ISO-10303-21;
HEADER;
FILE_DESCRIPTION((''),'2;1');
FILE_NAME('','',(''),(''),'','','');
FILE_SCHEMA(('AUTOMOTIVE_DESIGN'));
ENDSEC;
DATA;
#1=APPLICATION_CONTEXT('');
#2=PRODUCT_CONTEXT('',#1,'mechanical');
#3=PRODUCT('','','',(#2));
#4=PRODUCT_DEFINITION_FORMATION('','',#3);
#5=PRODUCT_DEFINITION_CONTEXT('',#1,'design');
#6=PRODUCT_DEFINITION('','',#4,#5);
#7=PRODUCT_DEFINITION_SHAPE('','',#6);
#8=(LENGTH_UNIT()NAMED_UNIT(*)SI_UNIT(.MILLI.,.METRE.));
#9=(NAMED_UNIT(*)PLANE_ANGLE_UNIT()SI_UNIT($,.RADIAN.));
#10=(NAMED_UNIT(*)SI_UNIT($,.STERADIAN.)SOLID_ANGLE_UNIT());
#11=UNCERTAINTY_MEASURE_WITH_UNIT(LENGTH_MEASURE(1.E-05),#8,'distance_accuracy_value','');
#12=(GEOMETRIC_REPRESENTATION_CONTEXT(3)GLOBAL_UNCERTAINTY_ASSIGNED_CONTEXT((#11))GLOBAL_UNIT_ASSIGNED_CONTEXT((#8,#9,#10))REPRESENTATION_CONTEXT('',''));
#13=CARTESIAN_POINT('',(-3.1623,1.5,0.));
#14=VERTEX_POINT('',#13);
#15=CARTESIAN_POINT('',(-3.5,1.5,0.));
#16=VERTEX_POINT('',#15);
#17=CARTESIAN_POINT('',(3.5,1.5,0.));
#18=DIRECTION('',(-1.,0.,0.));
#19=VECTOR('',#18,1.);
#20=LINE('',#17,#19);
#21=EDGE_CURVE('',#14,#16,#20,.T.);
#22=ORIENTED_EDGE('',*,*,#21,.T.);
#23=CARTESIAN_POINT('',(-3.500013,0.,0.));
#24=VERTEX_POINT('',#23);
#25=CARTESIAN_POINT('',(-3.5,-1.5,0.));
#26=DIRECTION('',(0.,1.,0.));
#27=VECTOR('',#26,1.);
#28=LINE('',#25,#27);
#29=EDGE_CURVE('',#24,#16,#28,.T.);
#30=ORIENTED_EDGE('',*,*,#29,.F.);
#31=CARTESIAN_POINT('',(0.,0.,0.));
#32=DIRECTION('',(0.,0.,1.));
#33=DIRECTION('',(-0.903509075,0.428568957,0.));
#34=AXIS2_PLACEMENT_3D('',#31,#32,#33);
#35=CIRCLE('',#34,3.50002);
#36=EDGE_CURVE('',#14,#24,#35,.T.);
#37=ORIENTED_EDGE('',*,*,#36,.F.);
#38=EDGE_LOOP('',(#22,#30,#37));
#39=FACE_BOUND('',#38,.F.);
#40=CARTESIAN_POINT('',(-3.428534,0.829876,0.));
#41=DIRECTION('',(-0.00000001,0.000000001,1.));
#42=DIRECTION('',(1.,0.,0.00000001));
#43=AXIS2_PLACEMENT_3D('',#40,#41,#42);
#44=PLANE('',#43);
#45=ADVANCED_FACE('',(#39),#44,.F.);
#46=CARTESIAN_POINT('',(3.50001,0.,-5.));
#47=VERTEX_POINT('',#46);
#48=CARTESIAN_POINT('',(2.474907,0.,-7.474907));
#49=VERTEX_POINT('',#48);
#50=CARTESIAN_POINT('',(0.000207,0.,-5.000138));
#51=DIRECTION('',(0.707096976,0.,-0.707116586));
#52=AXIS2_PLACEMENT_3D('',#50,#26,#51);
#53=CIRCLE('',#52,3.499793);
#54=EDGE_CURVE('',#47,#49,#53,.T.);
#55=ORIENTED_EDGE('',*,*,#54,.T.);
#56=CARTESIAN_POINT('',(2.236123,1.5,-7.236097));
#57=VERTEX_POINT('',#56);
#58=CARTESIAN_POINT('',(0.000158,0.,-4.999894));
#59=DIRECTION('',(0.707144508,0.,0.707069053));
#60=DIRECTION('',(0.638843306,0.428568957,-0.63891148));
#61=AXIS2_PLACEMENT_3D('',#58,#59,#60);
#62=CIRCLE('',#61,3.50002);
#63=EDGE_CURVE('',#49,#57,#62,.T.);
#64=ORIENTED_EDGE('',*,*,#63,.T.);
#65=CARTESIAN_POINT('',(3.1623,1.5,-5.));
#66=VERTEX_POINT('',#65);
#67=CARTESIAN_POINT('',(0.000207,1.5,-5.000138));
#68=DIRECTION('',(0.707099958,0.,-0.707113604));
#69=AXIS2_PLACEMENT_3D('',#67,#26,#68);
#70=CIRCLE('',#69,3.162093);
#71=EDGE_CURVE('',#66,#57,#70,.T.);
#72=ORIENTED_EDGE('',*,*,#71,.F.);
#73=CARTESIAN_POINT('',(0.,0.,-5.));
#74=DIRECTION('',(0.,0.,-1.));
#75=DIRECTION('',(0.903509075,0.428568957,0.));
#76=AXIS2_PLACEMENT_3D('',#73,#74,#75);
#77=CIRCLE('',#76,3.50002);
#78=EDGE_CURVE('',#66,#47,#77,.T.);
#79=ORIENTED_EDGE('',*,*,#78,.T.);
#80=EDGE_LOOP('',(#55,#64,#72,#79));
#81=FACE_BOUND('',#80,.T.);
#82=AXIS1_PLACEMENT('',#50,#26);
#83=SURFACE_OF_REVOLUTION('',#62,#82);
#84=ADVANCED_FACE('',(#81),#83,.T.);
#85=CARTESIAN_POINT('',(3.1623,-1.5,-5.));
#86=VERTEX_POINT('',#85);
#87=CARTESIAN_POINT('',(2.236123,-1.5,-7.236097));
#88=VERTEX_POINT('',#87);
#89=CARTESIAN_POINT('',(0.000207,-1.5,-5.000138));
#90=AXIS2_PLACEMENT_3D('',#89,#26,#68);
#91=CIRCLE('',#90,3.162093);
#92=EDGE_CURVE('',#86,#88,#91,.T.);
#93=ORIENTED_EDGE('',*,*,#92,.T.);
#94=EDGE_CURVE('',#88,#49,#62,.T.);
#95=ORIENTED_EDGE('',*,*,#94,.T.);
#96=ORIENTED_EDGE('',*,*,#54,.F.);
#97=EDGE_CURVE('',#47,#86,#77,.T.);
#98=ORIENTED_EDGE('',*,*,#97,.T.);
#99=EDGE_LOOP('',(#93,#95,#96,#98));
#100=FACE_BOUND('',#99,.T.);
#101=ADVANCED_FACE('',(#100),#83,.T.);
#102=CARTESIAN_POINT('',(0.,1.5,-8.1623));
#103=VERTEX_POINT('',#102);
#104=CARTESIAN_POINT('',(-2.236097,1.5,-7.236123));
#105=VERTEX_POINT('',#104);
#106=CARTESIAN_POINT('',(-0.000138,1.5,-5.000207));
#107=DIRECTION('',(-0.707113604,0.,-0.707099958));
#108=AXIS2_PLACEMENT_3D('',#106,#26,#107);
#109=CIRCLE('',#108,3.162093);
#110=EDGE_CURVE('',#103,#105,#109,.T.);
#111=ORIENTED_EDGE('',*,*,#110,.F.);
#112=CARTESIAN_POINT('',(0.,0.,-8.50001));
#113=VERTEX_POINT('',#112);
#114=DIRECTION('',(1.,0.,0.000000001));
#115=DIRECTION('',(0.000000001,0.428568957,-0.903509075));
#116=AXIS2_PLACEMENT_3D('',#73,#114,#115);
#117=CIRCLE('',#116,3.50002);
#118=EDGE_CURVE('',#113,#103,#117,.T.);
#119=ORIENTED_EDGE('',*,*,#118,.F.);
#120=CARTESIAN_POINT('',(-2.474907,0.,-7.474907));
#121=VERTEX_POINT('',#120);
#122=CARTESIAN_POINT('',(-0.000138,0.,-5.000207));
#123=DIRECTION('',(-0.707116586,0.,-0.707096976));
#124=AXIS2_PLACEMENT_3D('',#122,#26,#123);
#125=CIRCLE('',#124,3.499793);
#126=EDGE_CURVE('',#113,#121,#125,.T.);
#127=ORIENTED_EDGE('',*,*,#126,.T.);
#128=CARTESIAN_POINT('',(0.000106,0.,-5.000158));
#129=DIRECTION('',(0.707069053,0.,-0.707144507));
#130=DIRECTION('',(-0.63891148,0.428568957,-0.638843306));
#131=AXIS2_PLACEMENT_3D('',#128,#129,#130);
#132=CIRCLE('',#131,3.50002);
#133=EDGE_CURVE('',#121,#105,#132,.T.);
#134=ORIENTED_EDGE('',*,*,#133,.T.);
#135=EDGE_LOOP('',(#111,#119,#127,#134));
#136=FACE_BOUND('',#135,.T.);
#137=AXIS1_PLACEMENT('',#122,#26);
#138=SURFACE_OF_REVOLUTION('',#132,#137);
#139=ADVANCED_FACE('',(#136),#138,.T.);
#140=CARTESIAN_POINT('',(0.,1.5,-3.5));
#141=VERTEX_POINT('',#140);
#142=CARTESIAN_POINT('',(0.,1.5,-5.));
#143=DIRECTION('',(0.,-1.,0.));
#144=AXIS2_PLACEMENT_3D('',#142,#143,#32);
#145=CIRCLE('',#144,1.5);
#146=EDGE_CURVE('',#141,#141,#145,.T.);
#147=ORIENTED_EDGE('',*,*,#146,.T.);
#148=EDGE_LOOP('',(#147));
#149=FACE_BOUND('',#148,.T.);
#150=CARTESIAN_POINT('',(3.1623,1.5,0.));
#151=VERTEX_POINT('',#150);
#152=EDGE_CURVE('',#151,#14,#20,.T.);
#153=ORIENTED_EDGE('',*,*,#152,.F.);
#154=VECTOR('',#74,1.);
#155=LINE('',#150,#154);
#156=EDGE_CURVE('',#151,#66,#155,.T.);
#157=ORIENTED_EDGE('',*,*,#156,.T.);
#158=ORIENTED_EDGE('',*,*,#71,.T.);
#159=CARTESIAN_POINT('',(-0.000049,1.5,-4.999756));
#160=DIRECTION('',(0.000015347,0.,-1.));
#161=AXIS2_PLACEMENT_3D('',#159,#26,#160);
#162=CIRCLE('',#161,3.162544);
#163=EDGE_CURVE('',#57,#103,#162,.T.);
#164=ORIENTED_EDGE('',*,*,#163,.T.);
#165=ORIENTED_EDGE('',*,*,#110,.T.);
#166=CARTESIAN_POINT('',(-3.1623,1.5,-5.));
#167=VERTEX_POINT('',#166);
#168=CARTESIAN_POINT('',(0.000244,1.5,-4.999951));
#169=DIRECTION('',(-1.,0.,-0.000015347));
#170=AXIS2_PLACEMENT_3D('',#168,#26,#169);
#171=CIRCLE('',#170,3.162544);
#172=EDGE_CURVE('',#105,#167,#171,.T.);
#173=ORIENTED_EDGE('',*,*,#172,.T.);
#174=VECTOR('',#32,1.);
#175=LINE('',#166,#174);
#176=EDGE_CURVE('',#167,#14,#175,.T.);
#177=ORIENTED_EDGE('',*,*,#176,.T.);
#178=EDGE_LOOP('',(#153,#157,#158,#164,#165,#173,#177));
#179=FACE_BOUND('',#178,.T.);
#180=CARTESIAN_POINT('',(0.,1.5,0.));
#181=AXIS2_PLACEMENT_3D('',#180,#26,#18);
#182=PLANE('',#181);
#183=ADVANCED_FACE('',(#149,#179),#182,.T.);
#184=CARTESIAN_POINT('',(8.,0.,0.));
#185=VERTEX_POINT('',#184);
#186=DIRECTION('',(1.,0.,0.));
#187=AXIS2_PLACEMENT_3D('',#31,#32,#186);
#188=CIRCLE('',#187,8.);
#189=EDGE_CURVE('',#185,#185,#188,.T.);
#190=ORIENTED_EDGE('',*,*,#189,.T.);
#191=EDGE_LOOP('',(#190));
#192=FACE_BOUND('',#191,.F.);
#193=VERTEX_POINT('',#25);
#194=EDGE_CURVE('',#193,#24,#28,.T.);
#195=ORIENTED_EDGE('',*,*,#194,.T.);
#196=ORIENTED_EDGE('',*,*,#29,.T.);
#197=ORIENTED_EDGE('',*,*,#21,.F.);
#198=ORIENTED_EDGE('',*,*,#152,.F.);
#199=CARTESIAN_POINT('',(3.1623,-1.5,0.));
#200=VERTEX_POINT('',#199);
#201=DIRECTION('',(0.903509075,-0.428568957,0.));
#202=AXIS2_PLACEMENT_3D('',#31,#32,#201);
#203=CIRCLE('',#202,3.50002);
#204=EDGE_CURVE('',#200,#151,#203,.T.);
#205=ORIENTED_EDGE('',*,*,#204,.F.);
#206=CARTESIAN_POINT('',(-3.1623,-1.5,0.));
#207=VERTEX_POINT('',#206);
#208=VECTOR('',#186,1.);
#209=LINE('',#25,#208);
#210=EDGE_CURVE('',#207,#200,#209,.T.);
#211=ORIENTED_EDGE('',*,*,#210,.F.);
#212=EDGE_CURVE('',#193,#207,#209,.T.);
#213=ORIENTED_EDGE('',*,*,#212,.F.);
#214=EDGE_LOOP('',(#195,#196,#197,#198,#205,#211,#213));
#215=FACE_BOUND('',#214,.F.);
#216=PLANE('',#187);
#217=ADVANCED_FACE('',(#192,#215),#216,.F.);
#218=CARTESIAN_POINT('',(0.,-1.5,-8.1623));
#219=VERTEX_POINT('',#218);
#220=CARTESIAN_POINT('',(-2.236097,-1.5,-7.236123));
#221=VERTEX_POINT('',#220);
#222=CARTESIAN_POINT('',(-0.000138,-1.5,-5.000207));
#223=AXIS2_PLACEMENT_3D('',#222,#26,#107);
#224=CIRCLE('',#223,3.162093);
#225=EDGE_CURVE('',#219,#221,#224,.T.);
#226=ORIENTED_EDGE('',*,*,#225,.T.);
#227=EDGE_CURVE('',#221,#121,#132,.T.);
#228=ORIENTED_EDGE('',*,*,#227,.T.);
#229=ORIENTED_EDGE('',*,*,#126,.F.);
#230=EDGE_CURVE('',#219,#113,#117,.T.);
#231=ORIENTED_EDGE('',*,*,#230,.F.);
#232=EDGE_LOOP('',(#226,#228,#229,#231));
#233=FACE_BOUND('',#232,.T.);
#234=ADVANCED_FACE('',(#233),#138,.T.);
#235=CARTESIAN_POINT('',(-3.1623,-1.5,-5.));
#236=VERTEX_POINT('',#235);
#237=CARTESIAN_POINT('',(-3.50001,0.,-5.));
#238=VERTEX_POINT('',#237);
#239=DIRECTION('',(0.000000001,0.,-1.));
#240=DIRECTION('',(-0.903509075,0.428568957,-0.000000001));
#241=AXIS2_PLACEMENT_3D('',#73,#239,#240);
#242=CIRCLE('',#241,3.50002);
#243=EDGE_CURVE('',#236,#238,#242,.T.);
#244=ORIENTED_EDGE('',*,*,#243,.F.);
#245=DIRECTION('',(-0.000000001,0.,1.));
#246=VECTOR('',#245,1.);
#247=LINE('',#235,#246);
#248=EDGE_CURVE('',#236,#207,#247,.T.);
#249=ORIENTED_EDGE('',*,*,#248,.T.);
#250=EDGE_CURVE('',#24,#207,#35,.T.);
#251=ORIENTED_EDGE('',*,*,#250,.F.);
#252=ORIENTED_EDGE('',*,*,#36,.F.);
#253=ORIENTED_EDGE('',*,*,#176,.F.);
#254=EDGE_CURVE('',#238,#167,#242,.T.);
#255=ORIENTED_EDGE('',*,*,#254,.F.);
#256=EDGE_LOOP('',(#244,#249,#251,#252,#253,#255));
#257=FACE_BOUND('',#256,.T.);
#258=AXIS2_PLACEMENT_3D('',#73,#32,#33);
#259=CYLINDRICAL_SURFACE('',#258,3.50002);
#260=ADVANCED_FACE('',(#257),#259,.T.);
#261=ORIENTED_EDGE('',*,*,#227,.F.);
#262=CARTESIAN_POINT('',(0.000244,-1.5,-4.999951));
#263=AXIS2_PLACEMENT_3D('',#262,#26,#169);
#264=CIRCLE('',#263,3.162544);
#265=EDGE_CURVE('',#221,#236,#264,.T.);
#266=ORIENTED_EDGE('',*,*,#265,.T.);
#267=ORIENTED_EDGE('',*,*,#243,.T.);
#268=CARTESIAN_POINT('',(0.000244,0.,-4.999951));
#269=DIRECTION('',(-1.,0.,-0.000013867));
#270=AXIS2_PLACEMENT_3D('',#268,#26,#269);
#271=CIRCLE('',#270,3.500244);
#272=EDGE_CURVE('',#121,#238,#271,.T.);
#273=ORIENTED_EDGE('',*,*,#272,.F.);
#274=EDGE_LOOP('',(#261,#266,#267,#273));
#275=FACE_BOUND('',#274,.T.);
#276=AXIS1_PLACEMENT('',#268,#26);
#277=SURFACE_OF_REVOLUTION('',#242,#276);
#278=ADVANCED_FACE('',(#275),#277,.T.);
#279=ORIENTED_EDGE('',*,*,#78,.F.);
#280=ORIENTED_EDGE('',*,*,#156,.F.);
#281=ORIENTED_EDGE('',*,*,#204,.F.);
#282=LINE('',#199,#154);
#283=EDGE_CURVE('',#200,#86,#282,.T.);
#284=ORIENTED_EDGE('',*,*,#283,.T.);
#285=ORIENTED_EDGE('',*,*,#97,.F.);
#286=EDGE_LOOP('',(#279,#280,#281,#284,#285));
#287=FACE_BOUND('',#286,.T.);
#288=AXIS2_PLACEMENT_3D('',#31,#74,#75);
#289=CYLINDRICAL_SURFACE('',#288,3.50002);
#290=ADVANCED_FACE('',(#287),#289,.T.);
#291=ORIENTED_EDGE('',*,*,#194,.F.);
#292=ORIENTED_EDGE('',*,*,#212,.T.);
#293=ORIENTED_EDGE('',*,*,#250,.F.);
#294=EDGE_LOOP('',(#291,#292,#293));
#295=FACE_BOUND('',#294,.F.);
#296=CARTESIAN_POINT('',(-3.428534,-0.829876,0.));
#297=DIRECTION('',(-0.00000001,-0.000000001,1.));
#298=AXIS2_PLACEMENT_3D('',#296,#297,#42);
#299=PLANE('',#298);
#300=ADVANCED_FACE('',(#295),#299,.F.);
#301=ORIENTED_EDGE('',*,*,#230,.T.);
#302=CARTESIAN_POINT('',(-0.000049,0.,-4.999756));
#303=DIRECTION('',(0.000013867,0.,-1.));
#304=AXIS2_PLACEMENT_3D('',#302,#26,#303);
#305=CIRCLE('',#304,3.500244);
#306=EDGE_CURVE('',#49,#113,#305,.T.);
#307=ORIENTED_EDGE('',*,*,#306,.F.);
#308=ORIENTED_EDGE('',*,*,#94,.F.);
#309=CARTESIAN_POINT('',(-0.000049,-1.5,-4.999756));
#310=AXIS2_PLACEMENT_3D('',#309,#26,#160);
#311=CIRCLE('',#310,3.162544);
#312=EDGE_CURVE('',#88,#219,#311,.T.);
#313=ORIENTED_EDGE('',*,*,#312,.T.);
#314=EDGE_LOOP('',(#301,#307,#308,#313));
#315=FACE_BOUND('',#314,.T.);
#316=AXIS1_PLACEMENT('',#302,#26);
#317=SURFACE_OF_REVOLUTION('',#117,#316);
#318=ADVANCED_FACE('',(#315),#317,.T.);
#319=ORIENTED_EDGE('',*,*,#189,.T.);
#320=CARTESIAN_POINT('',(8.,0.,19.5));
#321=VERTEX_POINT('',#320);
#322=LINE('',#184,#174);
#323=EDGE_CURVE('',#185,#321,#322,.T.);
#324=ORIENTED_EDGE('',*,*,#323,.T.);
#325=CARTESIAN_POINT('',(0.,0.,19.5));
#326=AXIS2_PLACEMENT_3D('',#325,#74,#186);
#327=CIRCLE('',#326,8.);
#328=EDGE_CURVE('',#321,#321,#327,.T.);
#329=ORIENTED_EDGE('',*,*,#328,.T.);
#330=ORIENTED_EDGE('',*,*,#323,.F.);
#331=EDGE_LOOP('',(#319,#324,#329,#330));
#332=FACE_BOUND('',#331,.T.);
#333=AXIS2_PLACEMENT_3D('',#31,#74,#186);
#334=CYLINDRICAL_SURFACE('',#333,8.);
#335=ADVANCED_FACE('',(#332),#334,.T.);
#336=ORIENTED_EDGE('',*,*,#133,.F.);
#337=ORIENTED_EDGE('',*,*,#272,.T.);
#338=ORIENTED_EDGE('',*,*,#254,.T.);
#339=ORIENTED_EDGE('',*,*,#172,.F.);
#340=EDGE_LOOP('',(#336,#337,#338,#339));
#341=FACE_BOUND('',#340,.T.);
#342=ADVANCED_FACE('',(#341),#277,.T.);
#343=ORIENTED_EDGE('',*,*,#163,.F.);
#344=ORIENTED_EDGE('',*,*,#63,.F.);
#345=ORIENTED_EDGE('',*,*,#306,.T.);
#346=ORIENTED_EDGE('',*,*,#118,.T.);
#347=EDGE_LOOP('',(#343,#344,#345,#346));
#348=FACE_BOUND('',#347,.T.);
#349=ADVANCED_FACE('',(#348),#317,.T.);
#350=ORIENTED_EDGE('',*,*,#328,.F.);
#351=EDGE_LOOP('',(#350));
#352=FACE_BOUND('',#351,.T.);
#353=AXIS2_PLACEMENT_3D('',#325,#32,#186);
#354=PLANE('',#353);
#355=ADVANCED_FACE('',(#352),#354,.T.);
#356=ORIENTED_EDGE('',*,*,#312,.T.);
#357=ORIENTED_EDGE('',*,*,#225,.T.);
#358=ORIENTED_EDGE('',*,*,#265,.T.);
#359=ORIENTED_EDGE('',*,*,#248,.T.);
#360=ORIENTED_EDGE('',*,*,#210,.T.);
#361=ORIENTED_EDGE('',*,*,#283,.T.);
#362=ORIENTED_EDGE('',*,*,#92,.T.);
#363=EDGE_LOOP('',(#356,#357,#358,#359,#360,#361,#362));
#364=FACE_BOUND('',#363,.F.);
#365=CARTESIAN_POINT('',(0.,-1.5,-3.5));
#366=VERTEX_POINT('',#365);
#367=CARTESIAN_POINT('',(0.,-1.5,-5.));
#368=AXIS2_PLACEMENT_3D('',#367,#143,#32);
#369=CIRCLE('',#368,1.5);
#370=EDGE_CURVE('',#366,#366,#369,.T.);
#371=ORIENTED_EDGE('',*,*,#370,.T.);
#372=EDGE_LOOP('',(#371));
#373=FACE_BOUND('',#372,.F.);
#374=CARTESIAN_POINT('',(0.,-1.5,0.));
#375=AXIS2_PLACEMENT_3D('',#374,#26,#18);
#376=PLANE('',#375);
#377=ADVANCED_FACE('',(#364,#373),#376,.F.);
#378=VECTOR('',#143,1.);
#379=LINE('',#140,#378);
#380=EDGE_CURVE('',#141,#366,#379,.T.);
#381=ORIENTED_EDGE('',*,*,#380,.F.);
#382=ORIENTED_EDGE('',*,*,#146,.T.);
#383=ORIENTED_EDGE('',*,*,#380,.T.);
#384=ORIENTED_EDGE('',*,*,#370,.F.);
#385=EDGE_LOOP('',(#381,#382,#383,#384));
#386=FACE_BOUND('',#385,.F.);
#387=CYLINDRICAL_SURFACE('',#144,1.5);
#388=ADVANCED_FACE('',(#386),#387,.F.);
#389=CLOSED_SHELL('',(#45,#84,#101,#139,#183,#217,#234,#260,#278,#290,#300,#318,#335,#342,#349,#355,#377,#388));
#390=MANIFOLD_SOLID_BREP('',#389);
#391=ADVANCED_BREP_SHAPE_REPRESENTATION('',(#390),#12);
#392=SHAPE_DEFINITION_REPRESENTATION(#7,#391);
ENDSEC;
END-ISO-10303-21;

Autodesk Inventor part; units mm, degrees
ref_plane "YZ Plane" through (0, 0, 0) normal (1, 0, 0) x (0, 1, 0)
ref_plane "XZ Plane" through (0, 0, 0) normal (0, 1, 0) x (-1, 0, 0)
ref_plane "XY Plane" through (0, 0, 0) normal (0, 0, 1) x (1, 0, 0)
sketch "Skizze1" plane through (0, 0, 0) normal (0, 0, 1) x (1, 0, 0)
  line L0 (-11.2, 0) -> (11.2, 0) projected
  line L1 (0, -11.2) -> (0, 11.2) projected
  circle A0 centre (0, 0) radius 8
  dimension "d0" = 16
extrude "Extrusion1" add sketch "Skizze1" along normal blind 19.5
sketch "Skizze2" plane through (0, 0, 0) normal (0, 1, 0) x (-1, 0, 0)
  line L0 (11.2, 0) -> (-11.2, 0) projected
  line L1 (0, -3.9) -> (0, 23.4) projected
  arc A0 (-3.5, -5) -> (3.5, -5) centre (0, -5) ccw
  line L2 (3.5, -5) -> (3.5, 0)
  line L3 (-8, 0) -> (8, 0) projected
  line L4 (-3.5, -5) -> (-3.5, 0)
  point P0 (0, 0)
  dimension "d3" = 3.5
  dimension "d4" = 5
extrude "Extrusion2" add sketch "Skizze2" along normal mid plane 3
sketch "Skizze3" plane through (0, 1.5, 0) normal (0, 1, 0) x (1, 0, 0)
  arc A0 (3.5, 5) -> (-3.5, 5) centre (0, 5) ccw projected
  point P0 (0, 0)
hole "Bohrung1" at (0, 1.5, -5) direction (0, -1, 0) diameter 3 end through all
sketch "Skizze4" plane through (0, 0, 0) normal (0, 0, -1) x (-1, 0, 0)
  line L0 (-3.5, -1.5) -> (-3.5, 1.5) projected
  line L1 (3.5, -1.5) -> (3.5, 1.5) projected
  line L2 (-3.5, 1.5) -> (3.5, 1.5) projected
  line L3 (-3.5, -1.5) -> (-3.5, 1.5) projected
  line L4 (3.5, -1.5) -> (-3.5, -1.5) projected
  arc A0 (-3.1623, 1.5) -> (-3.1623, -1.5) centre (0, 0) ccw
  line L5 (-3.1623, 1.5) -> (-3.8633, 1.5)
  line L6 (-3.8633, 1.5) -> (-3.8633, -1.5)
  line L7 (-3.8633, -1.5) -> (-3.1623, -1.5)
  dimension "d14" = 3.5
  dimension "d15" = 3.8632
sketch "Skizze5" plane through (0, -1.5, 0) normal (0, -1, 0) x (1, 0, 0)
  arc A0 (-3.5, -5) -> (3.5, -5) centre (0, -5) ccw projected
  arc A1 (-3.5, -5) -> (3.5, -5) centre (0, -5) ccw
  line L0 (-3.5, 0) -> (-3.5, -5)
  line L1 (3.5, -5) -> (3.5, 0.5133)
  point P0 (0, 0)
sketch3d "3D-Skizze1"
  line L0 (3.5, -1.5, 0) -> (3.5, -1.5, -5)
  arc A0 (-3.5, -1.5, -5) -> (-2.4749, -1.5, -7.4749) centre (0, -1.5, -5) ccw
  arc A1 (-2.4749, -1.5, -7.4749) -> (0, -1.5, -8.5) centre (0, -1.5, -5) ccw
  arc A2 (0, -1.5, -8.5) -> (2.4749, -1.5, -7.4749) centre (0, -1.5, -5) ccw
  arc A3 (2.4749, -1.5, -7.4749) -> (3.5, -1.5, -5) centre (0, -1.5, -5) ccw
  line L1 (-3.5, -1.5, -5) -> (-3.5, -1.5, 0)
sweep "Sweeping1" cut profiles "Skizze4" path "3D-Skizze1" contours L7 L6 L5 L0 | L0 A0 L4 | L0 L2 A0
properties part number "Kolben"
